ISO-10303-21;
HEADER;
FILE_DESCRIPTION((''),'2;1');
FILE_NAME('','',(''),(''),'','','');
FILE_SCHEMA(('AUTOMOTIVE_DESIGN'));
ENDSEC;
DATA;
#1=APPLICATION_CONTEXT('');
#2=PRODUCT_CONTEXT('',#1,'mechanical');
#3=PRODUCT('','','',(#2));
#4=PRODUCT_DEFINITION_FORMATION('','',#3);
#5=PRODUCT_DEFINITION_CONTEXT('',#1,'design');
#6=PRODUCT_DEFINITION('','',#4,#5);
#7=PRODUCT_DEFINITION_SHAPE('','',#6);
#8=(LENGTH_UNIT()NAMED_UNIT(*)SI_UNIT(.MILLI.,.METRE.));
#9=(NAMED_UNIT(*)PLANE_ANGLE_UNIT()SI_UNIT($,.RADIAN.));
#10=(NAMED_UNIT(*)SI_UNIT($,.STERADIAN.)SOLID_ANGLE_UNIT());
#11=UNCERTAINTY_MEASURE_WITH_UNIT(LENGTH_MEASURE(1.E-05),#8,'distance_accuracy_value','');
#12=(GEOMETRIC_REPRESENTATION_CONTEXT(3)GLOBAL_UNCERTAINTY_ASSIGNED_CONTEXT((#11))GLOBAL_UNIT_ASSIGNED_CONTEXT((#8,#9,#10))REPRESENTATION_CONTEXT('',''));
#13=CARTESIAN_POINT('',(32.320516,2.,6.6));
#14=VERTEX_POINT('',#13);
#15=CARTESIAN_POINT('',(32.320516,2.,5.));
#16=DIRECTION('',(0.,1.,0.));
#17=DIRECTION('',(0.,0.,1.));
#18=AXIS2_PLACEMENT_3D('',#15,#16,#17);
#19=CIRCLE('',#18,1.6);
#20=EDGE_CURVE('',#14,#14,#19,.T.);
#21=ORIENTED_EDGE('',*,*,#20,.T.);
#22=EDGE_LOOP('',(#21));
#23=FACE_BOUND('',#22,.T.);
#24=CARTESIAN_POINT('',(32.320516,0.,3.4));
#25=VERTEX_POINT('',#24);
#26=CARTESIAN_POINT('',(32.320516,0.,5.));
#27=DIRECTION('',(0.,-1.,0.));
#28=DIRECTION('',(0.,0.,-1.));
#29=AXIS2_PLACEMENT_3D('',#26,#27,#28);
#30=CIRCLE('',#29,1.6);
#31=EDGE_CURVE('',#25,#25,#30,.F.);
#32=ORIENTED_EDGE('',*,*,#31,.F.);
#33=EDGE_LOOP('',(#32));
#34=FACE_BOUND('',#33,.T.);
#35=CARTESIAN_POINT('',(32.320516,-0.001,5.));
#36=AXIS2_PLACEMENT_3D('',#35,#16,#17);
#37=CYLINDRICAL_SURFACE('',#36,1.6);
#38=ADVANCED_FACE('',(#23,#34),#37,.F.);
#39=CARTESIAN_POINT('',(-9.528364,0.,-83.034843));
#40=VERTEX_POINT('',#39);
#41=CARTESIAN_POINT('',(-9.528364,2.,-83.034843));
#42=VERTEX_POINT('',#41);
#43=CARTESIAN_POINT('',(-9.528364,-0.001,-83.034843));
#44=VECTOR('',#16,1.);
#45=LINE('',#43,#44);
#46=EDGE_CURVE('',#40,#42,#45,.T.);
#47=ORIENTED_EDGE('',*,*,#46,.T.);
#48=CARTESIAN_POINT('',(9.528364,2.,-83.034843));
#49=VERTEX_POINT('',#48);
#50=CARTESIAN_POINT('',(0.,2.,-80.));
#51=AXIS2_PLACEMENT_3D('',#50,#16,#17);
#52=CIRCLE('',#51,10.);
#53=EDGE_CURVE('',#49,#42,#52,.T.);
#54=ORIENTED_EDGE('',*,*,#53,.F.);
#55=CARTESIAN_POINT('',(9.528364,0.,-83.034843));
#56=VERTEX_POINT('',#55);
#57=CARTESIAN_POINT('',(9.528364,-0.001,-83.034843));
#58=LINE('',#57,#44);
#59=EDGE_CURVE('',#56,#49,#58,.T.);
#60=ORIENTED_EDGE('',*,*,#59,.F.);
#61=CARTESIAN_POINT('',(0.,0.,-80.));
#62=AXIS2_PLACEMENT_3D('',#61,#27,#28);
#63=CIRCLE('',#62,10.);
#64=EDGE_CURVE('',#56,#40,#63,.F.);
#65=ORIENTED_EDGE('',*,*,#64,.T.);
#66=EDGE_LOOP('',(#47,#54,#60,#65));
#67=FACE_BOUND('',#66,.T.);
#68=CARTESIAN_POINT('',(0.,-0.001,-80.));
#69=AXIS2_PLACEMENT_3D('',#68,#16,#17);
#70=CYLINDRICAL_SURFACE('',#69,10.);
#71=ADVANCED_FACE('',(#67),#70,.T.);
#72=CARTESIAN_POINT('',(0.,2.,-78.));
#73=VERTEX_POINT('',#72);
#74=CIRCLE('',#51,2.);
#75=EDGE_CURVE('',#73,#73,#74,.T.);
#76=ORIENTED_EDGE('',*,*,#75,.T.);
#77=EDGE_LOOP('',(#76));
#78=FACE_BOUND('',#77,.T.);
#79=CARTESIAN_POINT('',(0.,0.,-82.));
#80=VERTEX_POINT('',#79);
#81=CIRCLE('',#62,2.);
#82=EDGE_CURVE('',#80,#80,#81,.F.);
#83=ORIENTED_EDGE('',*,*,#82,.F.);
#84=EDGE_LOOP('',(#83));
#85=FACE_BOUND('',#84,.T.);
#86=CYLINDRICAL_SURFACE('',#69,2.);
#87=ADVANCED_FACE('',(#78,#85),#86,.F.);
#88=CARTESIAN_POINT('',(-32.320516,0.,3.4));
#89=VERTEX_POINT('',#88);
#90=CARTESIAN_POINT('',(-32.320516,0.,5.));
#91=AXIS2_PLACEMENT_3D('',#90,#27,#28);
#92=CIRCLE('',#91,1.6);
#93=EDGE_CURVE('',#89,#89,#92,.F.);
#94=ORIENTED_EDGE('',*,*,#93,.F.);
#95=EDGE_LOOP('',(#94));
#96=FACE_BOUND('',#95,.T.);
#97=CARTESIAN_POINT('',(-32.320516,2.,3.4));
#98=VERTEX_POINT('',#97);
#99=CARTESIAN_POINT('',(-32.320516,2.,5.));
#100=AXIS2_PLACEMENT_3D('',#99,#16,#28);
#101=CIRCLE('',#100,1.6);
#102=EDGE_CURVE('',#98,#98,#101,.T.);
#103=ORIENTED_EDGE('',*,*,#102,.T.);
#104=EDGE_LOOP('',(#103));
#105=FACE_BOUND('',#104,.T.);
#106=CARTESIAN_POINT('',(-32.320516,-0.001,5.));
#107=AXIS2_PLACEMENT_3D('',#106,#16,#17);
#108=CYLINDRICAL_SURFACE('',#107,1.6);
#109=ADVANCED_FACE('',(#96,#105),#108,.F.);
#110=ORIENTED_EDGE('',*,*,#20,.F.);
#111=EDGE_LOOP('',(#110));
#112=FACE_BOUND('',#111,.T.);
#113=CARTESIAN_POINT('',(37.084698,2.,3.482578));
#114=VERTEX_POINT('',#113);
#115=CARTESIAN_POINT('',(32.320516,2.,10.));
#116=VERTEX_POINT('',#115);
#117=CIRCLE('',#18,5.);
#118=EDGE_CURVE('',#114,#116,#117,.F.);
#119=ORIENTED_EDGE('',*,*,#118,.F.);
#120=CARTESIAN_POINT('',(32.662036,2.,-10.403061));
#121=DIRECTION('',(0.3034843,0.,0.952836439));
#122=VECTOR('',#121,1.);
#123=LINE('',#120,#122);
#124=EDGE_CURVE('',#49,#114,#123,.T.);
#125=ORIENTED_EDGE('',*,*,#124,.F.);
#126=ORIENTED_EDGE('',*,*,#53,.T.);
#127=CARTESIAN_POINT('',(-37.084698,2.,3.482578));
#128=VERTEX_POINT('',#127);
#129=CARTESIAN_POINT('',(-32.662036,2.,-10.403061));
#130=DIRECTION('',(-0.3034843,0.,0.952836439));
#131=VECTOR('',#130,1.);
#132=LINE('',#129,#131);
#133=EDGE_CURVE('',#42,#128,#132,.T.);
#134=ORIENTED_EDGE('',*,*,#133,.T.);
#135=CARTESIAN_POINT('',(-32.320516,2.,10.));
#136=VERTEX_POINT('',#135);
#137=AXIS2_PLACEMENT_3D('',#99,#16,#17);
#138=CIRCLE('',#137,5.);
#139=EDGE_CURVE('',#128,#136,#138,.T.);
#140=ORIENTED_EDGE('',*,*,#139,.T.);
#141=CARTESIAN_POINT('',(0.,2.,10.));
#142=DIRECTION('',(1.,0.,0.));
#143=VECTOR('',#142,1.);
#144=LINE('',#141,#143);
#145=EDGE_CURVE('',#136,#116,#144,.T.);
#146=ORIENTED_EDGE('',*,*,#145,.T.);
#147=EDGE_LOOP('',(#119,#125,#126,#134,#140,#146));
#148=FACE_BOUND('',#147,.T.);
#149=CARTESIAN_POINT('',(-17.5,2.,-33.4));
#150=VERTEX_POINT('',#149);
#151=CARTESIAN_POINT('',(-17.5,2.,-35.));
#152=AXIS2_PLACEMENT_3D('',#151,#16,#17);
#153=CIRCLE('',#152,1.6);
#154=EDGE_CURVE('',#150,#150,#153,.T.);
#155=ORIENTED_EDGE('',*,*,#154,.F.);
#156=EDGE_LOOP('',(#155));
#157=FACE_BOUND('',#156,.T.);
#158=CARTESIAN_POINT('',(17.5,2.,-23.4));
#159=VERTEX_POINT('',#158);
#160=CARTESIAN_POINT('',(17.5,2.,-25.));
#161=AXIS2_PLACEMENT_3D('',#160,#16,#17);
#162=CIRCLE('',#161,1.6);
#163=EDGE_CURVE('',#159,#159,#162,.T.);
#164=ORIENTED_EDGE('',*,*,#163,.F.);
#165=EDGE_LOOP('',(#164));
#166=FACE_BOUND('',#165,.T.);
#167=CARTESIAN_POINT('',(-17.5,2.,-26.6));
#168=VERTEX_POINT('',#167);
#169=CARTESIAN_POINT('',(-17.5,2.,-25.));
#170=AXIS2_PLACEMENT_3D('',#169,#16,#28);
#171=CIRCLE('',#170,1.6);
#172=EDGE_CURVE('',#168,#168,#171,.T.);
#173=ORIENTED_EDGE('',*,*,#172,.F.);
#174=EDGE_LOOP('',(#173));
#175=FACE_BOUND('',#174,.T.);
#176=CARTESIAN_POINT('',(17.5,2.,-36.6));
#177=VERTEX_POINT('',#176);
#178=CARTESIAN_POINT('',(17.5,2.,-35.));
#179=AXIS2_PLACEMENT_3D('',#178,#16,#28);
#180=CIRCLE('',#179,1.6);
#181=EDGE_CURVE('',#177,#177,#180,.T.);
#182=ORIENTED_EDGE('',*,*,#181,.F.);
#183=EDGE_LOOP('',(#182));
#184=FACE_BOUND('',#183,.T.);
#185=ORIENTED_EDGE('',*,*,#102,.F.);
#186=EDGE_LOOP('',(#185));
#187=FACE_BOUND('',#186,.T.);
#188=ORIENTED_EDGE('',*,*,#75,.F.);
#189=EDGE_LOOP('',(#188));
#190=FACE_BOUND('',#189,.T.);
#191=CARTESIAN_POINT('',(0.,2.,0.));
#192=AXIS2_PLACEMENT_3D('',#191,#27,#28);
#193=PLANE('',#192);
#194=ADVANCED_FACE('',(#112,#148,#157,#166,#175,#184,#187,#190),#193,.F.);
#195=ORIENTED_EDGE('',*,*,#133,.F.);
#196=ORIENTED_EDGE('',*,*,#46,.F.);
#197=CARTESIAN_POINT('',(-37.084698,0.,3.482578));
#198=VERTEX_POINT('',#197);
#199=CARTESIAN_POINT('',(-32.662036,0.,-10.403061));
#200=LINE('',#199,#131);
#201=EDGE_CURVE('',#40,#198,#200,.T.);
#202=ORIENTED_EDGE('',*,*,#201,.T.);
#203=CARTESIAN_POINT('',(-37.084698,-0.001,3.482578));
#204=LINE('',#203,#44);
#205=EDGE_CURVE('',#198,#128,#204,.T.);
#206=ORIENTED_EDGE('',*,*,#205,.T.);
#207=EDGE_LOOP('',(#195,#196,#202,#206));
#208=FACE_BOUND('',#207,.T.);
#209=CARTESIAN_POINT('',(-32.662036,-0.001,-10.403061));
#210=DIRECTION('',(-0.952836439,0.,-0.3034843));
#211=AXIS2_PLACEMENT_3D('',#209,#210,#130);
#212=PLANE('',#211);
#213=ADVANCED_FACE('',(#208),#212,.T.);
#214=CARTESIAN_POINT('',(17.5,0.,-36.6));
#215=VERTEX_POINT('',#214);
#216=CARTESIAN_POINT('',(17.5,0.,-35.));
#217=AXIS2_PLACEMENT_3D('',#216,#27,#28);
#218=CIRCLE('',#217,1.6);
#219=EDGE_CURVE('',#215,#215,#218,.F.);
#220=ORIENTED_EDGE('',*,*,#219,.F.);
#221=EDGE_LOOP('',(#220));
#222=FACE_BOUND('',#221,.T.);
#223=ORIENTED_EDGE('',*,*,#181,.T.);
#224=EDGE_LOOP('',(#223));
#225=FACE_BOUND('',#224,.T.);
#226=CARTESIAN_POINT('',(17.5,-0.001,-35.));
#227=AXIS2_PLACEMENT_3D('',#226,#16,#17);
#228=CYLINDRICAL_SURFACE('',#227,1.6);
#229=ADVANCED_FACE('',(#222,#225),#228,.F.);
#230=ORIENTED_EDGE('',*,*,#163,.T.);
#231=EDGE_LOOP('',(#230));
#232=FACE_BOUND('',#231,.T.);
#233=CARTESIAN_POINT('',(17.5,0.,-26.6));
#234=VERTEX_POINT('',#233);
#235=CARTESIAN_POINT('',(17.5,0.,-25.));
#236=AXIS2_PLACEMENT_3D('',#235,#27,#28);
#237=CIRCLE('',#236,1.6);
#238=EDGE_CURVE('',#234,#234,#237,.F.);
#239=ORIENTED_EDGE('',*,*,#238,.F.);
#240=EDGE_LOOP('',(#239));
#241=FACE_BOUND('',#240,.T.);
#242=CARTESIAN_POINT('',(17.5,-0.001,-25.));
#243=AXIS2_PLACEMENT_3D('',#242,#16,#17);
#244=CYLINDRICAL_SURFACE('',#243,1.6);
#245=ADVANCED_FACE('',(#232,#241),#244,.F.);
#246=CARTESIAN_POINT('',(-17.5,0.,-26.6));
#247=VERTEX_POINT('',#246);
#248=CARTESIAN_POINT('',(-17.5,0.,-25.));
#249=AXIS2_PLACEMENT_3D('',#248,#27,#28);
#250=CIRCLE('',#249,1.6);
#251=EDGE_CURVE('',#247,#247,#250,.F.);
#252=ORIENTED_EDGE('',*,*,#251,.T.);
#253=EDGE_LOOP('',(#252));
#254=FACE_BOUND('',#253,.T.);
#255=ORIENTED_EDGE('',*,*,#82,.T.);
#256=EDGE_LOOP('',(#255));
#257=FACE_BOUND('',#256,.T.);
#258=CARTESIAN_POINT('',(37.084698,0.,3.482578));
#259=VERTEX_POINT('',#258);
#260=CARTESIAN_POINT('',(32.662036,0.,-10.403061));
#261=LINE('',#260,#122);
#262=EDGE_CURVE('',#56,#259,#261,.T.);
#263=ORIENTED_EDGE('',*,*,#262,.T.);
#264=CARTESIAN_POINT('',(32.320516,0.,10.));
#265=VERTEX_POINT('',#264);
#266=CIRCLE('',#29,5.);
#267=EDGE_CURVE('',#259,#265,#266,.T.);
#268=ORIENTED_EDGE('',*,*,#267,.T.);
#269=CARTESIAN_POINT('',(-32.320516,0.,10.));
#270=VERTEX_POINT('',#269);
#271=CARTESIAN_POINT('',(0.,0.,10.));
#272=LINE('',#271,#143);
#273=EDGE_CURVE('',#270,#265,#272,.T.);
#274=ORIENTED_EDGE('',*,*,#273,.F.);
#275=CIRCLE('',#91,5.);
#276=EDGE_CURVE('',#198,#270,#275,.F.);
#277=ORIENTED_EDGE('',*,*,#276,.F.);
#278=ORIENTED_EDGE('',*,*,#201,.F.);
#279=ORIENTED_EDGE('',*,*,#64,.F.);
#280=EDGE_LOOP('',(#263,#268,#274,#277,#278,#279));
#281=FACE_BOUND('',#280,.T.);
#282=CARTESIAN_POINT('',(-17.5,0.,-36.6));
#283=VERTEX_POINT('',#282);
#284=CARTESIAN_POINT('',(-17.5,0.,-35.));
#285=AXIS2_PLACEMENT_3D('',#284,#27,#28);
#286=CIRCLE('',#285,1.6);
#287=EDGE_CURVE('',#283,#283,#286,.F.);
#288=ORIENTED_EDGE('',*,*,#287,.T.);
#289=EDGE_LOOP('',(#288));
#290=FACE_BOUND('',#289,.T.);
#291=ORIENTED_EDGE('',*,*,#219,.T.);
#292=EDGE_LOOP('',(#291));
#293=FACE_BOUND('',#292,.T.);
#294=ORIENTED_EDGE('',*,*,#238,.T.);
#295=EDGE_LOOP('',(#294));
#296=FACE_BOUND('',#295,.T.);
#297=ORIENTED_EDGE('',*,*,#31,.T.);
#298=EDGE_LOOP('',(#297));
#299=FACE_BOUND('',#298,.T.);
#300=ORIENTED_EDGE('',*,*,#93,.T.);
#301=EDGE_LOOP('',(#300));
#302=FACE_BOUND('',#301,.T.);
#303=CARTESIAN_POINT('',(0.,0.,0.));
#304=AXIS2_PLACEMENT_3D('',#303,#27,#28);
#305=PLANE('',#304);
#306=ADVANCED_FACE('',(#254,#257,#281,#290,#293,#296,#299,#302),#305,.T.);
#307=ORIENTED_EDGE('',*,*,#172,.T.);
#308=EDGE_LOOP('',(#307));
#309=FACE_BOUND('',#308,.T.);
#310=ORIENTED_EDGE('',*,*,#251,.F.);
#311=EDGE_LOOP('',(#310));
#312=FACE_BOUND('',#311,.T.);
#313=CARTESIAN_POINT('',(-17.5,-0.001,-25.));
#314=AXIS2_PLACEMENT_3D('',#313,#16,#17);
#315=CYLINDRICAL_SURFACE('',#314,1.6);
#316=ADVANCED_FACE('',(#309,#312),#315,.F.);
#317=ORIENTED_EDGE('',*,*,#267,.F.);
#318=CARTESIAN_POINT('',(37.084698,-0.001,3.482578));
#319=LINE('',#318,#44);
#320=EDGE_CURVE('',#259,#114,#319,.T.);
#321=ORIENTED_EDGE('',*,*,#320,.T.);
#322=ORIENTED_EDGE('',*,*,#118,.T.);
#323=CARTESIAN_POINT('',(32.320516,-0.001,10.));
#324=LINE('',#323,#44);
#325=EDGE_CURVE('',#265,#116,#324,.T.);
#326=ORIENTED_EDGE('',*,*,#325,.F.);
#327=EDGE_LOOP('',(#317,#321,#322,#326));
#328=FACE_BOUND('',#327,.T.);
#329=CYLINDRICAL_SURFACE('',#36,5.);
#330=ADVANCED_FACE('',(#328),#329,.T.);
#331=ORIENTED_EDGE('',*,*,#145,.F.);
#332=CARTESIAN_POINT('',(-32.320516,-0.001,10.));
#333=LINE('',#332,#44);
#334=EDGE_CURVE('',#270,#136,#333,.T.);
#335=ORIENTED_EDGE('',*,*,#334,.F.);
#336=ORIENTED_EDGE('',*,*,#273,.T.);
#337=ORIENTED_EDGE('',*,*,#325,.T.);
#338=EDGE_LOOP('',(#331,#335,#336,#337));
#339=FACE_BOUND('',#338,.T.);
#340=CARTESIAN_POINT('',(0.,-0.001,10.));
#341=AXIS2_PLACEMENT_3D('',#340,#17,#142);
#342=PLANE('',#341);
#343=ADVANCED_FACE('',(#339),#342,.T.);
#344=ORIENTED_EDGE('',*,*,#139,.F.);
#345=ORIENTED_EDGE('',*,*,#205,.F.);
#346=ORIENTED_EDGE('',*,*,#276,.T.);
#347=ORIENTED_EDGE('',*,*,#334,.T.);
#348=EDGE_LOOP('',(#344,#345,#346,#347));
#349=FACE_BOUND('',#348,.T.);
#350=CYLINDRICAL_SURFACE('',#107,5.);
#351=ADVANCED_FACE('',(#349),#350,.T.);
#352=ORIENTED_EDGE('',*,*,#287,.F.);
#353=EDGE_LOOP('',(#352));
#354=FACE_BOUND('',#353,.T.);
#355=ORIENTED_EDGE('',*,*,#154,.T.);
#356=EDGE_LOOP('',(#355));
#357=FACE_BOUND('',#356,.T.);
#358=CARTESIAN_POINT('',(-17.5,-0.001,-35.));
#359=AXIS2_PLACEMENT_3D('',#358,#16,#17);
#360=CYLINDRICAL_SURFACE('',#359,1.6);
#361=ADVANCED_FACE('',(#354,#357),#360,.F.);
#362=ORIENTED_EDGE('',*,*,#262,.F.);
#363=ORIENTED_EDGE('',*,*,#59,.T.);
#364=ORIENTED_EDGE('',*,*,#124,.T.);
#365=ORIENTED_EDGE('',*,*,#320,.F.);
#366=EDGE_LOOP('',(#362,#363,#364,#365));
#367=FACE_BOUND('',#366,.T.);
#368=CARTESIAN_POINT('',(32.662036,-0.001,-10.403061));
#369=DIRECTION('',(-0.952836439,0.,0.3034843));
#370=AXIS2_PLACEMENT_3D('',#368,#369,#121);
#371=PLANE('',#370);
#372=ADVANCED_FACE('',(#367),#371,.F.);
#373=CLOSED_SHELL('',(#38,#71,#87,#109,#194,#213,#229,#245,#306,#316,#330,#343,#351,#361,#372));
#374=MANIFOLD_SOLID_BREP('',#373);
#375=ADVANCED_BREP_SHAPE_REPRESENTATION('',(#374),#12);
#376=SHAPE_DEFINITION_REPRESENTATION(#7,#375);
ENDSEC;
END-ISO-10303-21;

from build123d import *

# Parameters (mm, degrees)
SKETCH_1_W              = 150
SKETCH_1_H              = 200
EXTRUDE_1_DEPTH         = 2
CUT_EXTRUDE_1_REACH     = 127.016
SKETCH_2_R              = 2
CUT_EXTRUDE_2_REACH     = 127.016
SKETCH_3_R              = 1.6
CUT_EXTRUDE_3_REACH     = 127.016
SKETCH_5_R              = 1.6
CUT_EXTRUDE_START       = -2
CUT_EXTRUDE_4_OUTLINE_W = 150
CUT_EXTRUDE_4_OUTLINE_H = 200
CUT_EXTRUDE_4_DEPTH     = 2


# Read off the part's stored shape, not the designer's step: 切除-拉伸4
with BuildPart() as part:
    # 草图1 → 凸台-拉伸1 (new body)
    with BuildSketch(Plane(origin=(0, 0, 0), x_dir=(1, 0, 0), z_dir=(0, 1, 0))):
        Rectangle(SKETCH_1_W, SKETCH_1_H)
    extrude(amount=EXTRUDE_1_DEPTH)

    # 草图2 → 切除-拉伸1 (cut, up to next)
    with BuildSketch(Plane(origin=(0, 2, 0), x_dir=(1, 0, 0), z_dir=(0, 1, 0)), mode=Mode.PRIVATE) as cut_extrude_1_sk1:
        with Locations(Location((0, 80, 0), (0, 0, 270))):
            Circle(SKETCH_2_R)
    cut_extrude_1_tool1 = extrude(cut_extrude_1_sk1.sketch, amount=-CUT_EXTRUDE_1_REACH, mode=Mode.PRIVATE) & part.part
    add(cut_extrude_1_tool1.solids().sort_by_distance((0, 2, -80))[0], mode=Mode.SUBTRACT)

    # 草图3 → 切除-拉伸2 (cut, up to next)
    with BuildSketch(Plane(origin=(0, 2, 0), x_dir=(1, 0, 0), z_dir=(0, 1, 0)), mode=Mode.PRIVATE) as cut_extrude_2_sk1:
        with Locations(Location((-17.5, 35, 0), (0, 0, 270))):
            Circle(SKETCH_3_R)
    cut_extrude_2_tool1 = extrude(cut_extrude_2_sk1.sketch, amount=-CUT_EXTRUDE_2_REACH, mode=Mode.PRIVATE) & part.part
    # 草图3 → 切除-拉伸2 (cut, up to next)
    with BuildSketch(Plane(origin=(0, 2, 0), x_dir=(1, 0, 0), z_dir=(0, 1, 0)), mode=Mode.PRIVATE) as cut_extrude_2_sk2:
        with Locations(Location((-17.5, 25, 0), (0, 0, 90))):
            Circle(SKETCH_3_R)
    cut_extrude_2_tool2 = extrude(cut_extrude_2_sk2.sketch, amount=-CUT_EXTRUDE_2_REACH, mode=Mode.PRIVATE) & part.part
    # 草图3 → 切除-拉伸2 (cut, up to next)
    with BuildSketch(Plane(origin=(0, 2, 0), x_dir=(1, 0, 0), z_dir=(0, 1, 0)), mode=Mode.PRIVATE) as cut_extrude_2_sk3:
        with Locations(Location((17.5, 25, 0), (0, 0, 270))):
            Circle(SKETCH_3_R)
    cut_extrude_2_tool3 = extrude(cut_extrude_2_sk3.sketch, amount=-CUT_EXTRUDE_2_REACH, mode=Mode.PRIVATE) & part.part
    # 草图3 → 切除-拉伸2 (cut, up to next)
    with BuildSketch(Plane(origin=(0, 2, 0), x_dir=(1, 0, 0), z_dir=(0, 1, 0)), mode=Mode.PRIVATE) as cut_extrude_2_sk4:
        with Locations(Location((17.5, 35, 0), (0, 0, 90))):
            Circle(SKETCH_3_R)
    cut_extrude_2_tool4 = extrude(cut_extrude_2_sk4.sketch, amount=-CUT_EXTRUDE_2_REACH, mode=Mode.PRIVATE) & part.part
    add(cut_extrude_2_tool1.solids().sort_by_distance((-17.5, 2, -35))[0], mode=Mode.SUBTRACT)
    add(cut_extrude_2_tool2.solids().sort_by_distance((-17.5, 2, -25))[0], mode=Mode.SUBTRACT)
    add(cut_extrude_2_tool3.solids().sort_by_distance((17.5, 2, -25))[0], mode=Mode.SUBTRACT)
    add(cut_extrude_2_tool4.solids().sort_by_distance((17.5, 2, -35))[0], mode=Mode.SUBTRACT)

    # 草图5 → 切除-拉伸3 (cut, up to next)
    with BuildSketch(Plane(origin=(0, 2, 0), x_dir=(1, 0, 0), z_dir=(0, 1, 0)), mode=Mode.PRIVATE) as cut_extrude_3_sk1:
        with Locations(Location((32.32051615, -5, 0), (0, 0, 270))):
            Circle(SKETCH_5_R)
    cut_extrude_3_tool1 = extrude(cut_extrude_3_sk1.sketch, amount=-CUT_EXTRUDE_3_REACH, mode=Mode.PRIVATE) & part.part
    # 草图5 → 切除-拉伸3 (cut, up to next)
    with BuildSketch(Plane(origin=(0, 2, 0), x_dir=(1, 0, 0), z_dir=(0, 1, 0)), mode=Mode.PRIVATE) as cut_extrude_3_sk2:
        with Locations(Location((-32.32051615, -5, 0), (0, 0, 90))):
            Circle(SKETCH_5_R)
    cut_extrude_3_tool2 = extrude(cut_extrude_3_sk2.sketch, amount=-CUT_EXTRUDE_3_REACH, mode=Mode.PRIVATE) & part.part
    add(cut_extrude_3_tool1.solids().sort_by_distance((32.320516, 2, 5))[0], mode=Mode.SUBTRACT)
    add(cut_extrude_3_tool2.solids().sort_by_distance((-32.320516, 2, 5))[0], mode=Mode.SUBTRACT)

    # 切除-拉伸4 outline → 切除-拉伸4 (cut)
    with BuildSketch(Plane(origin=(0, 2, 0), x_dir=(1, 0, 0), z_dir=(0, 1, 0)).offset(CUT_EXTRUDE_START)):
        Rectangle(CUT_EXTRUDE_4_OUTLINE_W, CUT_EXTRUDE_4_OUTLINE_H)
        with BuildLine():
            ThreePointArc((-9.52836439, 83.034843002), (0, 90), (9.52836439, 83.034843002))
            Line((9.52836439, 83.034843002), (37.084698345, -3.482578499))
            ThreePointArc((37.084698345, -3.482578499), (36.357043587, -7.95066878), (32.32051615, -10))
            Line((32.32051615, -10), (-32.32051615, -10))
            ThreePointArc((-32.32051615, -10), (-36.357043587, -7.95066878), (-37.084698345, -3.482578499))
            Line((-37.084698345, -3.482578499), (-9.52836439, 83.034843002))
        make_face(mode=Mode.SUBTRACT)
    extrude(amount=CUT_EXTRUDE_4_DEPTH, mode=Mode.SUBTRACT)


solid = part.part
